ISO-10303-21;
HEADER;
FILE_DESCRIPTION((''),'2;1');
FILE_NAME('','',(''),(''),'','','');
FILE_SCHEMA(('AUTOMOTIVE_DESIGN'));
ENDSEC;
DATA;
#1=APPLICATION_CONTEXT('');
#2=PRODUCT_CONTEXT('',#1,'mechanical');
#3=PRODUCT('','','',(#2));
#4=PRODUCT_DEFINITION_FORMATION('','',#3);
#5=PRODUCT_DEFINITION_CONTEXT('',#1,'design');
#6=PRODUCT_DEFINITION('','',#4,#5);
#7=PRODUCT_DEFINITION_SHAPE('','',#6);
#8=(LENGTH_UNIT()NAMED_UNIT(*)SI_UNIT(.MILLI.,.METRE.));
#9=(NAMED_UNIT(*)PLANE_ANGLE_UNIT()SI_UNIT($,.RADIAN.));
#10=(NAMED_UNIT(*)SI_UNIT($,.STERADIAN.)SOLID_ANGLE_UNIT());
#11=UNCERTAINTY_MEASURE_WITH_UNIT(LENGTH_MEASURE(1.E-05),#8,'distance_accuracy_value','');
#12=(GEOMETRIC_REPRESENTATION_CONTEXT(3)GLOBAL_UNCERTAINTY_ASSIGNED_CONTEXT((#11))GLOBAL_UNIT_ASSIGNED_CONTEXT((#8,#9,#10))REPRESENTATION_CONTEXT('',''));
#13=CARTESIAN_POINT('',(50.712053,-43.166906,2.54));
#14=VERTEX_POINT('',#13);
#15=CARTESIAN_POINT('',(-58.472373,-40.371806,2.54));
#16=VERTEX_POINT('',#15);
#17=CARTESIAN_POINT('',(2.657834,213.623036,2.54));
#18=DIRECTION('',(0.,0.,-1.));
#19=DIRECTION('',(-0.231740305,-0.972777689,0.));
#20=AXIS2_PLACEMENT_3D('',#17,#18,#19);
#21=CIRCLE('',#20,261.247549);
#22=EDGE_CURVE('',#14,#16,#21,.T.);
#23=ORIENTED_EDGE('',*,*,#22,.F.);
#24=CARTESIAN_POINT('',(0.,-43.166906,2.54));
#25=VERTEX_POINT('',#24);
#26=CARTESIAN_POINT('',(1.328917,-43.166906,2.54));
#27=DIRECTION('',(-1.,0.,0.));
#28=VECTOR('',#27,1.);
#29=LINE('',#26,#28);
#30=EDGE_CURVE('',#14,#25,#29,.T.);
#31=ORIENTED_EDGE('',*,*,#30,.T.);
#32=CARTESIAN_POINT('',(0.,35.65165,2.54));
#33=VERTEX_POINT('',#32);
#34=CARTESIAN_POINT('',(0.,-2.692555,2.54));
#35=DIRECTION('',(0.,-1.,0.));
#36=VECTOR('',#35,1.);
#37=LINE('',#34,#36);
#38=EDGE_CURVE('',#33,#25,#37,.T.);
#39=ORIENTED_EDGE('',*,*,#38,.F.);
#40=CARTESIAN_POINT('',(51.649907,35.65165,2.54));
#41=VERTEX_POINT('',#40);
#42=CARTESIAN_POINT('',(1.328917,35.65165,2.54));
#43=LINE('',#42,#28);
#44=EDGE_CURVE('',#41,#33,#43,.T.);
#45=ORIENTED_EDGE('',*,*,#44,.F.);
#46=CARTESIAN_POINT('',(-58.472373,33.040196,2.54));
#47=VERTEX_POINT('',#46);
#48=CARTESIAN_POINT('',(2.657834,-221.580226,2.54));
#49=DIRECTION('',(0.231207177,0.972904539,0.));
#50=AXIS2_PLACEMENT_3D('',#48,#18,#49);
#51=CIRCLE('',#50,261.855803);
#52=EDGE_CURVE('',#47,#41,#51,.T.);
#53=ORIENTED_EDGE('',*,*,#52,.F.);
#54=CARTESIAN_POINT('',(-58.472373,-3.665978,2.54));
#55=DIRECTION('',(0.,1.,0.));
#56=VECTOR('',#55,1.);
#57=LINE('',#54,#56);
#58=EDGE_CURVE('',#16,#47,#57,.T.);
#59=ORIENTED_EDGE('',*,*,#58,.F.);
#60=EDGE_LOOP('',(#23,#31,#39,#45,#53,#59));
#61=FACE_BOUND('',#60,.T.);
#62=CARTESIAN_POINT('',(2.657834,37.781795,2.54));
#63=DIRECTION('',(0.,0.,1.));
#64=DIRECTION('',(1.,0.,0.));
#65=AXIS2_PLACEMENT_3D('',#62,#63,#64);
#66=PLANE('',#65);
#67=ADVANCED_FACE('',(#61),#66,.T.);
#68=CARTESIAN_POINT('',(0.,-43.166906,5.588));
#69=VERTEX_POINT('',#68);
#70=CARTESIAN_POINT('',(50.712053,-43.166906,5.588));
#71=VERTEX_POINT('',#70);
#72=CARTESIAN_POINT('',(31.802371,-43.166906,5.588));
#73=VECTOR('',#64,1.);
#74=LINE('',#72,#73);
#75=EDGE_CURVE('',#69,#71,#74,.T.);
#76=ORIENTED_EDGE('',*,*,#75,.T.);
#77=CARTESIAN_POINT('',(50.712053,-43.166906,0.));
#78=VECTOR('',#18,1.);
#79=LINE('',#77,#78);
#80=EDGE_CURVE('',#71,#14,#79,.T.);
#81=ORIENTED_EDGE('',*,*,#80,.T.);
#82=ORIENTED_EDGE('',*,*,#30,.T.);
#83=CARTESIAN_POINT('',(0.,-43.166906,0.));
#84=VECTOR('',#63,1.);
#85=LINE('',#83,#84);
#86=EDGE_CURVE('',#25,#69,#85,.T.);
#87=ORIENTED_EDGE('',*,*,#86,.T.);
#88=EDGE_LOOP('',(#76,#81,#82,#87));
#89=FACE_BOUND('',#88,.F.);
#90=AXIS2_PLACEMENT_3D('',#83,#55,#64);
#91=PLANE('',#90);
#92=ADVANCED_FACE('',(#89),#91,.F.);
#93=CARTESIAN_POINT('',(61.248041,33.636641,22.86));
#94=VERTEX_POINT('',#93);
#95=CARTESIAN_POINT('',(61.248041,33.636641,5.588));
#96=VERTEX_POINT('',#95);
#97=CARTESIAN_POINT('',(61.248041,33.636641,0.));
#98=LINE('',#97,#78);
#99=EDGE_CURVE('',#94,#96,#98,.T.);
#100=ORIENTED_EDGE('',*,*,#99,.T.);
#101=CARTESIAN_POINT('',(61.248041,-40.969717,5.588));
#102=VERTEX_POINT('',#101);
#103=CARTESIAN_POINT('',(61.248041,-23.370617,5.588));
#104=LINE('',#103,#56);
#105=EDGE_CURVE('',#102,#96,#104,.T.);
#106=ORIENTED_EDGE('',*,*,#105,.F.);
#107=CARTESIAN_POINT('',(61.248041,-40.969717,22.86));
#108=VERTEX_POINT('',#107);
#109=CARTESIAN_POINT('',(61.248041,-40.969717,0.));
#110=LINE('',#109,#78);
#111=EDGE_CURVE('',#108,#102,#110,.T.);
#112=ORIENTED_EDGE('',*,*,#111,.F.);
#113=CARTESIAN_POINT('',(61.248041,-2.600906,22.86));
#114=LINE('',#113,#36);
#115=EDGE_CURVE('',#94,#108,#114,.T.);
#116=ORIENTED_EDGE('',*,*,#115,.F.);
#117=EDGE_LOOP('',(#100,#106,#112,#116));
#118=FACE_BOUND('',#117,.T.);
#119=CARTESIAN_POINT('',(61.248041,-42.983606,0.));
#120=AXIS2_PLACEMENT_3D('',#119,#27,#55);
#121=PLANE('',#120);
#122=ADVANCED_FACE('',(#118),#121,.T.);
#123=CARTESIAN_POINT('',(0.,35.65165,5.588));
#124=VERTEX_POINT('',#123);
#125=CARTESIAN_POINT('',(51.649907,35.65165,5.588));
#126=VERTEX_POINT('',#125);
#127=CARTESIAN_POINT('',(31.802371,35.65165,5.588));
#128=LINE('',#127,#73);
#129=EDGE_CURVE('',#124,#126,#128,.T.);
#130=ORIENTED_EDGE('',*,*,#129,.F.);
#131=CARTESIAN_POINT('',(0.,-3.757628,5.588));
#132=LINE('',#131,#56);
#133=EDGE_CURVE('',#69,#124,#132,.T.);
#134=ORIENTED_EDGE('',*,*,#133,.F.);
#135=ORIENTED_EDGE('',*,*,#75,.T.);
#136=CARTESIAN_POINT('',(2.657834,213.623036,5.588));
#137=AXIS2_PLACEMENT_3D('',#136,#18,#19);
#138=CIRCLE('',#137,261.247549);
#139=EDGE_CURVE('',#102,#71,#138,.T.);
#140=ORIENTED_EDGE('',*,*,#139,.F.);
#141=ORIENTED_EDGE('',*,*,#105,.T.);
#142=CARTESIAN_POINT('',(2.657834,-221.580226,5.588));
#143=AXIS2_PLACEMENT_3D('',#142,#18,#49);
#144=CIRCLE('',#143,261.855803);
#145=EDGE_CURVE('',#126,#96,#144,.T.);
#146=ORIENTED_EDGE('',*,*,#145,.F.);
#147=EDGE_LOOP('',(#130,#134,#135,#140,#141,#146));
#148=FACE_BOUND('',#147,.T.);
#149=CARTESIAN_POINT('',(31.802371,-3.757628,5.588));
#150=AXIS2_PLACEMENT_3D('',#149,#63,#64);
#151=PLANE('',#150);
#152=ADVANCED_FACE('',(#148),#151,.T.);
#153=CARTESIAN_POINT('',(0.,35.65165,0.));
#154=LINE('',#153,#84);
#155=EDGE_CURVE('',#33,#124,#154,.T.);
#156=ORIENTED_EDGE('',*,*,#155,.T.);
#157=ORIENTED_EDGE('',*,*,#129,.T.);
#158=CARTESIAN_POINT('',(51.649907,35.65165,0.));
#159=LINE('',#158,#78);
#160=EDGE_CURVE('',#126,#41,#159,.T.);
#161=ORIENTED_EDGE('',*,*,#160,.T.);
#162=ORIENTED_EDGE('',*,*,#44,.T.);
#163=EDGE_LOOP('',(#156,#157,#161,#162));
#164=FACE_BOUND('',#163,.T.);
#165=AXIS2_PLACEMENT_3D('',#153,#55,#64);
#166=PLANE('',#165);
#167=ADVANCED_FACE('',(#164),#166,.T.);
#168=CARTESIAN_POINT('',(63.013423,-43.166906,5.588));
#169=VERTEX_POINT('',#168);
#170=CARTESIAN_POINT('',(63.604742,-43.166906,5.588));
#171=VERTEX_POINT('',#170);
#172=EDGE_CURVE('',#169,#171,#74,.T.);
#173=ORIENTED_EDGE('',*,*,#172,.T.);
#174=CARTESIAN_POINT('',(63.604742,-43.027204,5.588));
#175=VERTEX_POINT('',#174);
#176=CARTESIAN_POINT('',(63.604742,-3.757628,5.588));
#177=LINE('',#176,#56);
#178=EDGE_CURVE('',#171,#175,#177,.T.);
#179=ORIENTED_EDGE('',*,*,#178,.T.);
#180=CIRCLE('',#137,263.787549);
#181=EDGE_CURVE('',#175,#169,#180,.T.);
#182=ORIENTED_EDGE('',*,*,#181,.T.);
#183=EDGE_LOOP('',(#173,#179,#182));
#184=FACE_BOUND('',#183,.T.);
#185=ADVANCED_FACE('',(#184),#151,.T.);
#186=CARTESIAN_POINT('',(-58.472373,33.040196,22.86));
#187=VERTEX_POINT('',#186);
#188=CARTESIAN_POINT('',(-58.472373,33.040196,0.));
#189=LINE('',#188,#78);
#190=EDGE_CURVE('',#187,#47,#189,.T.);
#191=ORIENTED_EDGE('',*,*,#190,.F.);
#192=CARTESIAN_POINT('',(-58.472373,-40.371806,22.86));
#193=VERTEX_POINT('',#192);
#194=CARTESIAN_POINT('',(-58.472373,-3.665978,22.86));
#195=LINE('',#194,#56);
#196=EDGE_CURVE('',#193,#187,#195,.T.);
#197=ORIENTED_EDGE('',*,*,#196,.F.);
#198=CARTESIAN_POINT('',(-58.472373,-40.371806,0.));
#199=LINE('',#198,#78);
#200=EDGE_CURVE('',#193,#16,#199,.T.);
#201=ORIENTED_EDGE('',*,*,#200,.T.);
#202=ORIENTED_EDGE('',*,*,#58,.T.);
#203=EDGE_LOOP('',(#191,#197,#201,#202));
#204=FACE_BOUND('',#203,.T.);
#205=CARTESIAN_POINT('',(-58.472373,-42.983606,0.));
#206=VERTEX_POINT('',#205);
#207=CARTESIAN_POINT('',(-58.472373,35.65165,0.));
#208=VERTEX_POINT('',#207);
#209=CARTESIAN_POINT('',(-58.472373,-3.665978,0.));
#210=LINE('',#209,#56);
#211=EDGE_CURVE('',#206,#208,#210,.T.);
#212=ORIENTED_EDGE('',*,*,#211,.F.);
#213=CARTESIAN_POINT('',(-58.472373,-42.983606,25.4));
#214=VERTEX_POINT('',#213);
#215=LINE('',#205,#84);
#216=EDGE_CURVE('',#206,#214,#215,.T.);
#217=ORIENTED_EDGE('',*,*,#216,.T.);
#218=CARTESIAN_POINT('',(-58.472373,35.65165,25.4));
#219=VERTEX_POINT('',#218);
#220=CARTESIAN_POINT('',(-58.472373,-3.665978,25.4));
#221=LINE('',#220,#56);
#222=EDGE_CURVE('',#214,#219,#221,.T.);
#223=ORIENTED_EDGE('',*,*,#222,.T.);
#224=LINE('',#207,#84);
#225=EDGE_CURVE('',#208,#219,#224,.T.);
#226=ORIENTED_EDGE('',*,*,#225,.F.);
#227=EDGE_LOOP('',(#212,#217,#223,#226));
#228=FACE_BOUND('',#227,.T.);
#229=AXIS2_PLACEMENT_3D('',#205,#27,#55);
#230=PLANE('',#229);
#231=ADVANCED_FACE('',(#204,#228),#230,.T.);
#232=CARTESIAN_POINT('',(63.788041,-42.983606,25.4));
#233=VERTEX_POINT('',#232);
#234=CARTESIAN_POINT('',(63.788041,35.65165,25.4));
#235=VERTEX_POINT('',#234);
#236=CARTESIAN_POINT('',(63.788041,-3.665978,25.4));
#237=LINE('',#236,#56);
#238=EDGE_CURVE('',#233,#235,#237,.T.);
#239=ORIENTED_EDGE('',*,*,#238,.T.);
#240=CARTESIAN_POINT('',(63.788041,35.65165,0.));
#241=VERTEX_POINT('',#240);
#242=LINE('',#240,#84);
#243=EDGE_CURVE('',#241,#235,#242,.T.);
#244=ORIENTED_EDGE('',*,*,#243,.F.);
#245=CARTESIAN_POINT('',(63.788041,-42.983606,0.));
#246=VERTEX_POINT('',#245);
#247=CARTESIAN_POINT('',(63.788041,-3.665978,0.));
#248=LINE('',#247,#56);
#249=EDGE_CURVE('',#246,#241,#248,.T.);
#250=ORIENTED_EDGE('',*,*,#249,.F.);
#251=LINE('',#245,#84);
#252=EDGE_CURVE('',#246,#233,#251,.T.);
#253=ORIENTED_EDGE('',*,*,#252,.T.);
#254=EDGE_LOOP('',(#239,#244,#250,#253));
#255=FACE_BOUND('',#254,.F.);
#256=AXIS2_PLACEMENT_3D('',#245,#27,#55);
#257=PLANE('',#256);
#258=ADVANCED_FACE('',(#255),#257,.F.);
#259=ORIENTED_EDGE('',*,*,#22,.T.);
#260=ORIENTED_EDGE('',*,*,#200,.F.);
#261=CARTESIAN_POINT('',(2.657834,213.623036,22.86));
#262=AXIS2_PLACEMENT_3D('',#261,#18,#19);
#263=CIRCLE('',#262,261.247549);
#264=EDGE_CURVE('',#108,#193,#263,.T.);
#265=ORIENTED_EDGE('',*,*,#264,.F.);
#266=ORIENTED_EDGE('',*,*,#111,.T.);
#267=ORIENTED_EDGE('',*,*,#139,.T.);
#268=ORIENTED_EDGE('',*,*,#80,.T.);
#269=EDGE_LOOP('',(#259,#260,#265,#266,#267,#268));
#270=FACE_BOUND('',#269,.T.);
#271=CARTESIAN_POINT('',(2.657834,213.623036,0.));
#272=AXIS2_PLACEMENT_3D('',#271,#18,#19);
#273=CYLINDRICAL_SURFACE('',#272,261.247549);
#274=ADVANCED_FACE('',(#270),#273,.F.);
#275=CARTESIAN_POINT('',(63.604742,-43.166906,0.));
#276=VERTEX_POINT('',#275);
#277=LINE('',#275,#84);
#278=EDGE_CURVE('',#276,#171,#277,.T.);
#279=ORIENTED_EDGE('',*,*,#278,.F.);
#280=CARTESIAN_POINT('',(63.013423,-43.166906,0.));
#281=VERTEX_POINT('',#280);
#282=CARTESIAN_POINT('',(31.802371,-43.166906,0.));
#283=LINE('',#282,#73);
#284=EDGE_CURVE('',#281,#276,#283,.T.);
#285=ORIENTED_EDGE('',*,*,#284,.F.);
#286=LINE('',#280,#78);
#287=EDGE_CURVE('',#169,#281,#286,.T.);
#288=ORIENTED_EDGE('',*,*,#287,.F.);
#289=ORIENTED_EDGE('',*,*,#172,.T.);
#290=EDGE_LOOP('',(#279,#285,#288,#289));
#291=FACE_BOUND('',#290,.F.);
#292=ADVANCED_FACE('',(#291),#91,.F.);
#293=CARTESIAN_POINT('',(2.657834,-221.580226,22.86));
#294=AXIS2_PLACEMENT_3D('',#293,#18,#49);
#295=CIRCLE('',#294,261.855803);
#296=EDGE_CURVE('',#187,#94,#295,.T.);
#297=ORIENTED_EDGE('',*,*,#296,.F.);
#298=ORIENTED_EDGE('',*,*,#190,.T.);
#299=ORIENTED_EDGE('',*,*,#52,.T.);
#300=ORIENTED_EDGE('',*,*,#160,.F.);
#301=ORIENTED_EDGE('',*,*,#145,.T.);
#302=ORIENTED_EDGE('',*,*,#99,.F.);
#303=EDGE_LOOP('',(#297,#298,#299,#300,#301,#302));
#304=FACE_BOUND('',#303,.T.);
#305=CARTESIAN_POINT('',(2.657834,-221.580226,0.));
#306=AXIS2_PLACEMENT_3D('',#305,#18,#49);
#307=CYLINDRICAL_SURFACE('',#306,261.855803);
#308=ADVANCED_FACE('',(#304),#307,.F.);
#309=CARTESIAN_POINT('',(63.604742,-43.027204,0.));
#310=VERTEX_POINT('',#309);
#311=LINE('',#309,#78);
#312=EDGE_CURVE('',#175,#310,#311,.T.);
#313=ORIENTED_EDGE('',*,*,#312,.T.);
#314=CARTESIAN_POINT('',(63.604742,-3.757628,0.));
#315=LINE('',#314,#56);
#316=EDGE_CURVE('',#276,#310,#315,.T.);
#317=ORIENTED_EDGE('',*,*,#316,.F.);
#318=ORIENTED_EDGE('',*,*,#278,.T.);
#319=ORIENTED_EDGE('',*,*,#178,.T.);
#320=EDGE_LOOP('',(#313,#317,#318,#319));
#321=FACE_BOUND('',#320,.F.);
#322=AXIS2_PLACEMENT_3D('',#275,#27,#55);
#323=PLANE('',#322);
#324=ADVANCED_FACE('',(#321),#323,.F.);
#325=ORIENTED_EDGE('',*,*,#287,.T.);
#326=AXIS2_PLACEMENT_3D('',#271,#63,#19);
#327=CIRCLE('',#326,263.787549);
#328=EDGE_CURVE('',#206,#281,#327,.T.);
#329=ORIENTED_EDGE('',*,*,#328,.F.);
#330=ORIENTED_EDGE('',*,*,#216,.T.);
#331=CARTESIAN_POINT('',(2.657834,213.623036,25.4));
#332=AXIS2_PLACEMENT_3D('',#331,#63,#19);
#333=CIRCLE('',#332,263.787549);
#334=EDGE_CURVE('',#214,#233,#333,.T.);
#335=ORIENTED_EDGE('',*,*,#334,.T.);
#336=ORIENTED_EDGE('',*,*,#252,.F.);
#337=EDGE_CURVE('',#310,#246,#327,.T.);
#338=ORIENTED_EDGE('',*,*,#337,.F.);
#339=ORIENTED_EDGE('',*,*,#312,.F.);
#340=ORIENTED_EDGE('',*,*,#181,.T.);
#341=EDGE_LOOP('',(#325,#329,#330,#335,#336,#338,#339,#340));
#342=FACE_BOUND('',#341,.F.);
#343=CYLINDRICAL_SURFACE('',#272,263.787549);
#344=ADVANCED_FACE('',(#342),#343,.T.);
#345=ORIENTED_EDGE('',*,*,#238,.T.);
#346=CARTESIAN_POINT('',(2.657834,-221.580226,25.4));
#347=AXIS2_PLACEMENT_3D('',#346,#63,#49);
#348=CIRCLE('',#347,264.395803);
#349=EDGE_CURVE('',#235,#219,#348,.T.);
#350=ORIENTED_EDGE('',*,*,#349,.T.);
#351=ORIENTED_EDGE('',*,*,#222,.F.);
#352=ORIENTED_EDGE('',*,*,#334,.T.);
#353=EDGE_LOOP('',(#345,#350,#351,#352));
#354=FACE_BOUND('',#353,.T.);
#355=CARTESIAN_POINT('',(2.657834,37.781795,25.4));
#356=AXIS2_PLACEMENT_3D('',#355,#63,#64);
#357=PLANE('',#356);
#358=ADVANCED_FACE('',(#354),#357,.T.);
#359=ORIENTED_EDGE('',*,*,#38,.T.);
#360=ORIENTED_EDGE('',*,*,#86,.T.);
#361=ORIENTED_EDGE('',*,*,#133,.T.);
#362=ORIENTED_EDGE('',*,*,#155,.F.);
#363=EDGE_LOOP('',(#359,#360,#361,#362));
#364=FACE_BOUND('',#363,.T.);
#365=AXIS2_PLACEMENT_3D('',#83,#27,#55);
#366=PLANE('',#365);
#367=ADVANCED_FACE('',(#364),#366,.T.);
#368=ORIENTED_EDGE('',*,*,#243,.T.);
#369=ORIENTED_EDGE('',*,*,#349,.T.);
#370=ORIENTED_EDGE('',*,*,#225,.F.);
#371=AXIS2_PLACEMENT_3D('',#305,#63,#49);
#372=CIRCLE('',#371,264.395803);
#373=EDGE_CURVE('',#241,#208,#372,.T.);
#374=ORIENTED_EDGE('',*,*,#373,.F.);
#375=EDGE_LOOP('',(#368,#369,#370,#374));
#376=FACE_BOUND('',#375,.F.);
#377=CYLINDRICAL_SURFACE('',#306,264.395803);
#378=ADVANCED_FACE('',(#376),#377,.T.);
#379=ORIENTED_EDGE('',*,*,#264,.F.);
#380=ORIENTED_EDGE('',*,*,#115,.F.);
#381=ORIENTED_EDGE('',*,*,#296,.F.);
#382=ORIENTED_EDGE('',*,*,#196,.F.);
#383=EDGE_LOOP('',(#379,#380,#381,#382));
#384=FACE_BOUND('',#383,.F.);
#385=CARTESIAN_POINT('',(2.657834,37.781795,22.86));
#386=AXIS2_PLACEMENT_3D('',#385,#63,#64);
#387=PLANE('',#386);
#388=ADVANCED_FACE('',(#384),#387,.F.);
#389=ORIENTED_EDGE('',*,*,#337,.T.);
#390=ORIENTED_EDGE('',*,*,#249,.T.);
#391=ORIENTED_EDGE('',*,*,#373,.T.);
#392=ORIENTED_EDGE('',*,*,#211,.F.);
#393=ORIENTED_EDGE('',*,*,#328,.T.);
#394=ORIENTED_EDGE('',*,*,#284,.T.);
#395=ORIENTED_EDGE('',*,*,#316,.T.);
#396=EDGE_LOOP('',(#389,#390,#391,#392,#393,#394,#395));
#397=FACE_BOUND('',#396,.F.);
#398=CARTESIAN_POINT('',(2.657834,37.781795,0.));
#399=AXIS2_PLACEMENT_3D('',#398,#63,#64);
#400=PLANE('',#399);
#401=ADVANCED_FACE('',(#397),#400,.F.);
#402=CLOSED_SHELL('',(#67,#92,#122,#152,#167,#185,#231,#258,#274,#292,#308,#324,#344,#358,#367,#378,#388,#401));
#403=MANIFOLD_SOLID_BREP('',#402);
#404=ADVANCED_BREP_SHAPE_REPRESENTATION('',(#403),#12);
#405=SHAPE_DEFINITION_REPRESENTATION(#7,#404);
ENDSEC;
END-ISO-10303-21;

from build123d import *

# Parameters (mm, degrees)
F0_W     = 122.2604140639
F0_H     = 78.6352567375
F2_DEPTH = 25.4
F3_T     = -2.54
F1_W     = 63.6047422886
F1_H     = 78.8185559213
F4_DEPTH = 5.588
F5_R     = 1.6394762834
F6_DEPTH = 28.194
F5_R_2   = 1.6394765438
F7_DEPTH = 32.258


# Not quite as in the source:
# - the program builds the solid bodies; features that only make, move or delete a surface that nothing else refers to are left out


with BuildPart() as f2:
    # F0 (on Top) → F2 (new body)
    with BuildSketch(Plane.XY):
        with BuildLine():
            ThreePointArc((63.7880414724, 35.6516502798), (2.6578344405, 42.8155765092), (-58.4723725915, 35.6516502798))
            Line((-58.4723725915, 35.6516502798), (63.7880414724, 35.6516502798))
        make_face()
        with Locations((2.6578344405, -3.665978089)):
            Rectangle(F0_W, F0_H)
        with BuildLine():
            Line((63.7880414724, -42.9836064577), (-58.4723725915, -42.9836064577))
            ThreePointArc((-58.4723725915, -42.9836064577), (2.6578344405, -50.1645132958), (63.7880414724, -42.9836064577))
        make_face()
    extrude(amount=F2_DEPTH)

    # F3
    f3_openings = [f2.faces().sort_by_distance(p)[0] for p in [
        (-58.472373, -3.665978, 12.7),
    ]]
    offset(amount=F3_T, openings=f3_openings)

    # F1 (on Top) → F4 (join)
    with BuildSketch(Plane.XY):
        with Locations((31.8023711443, -3.7576276809)):
            Rectangle(F1_W, F1_H)
    extrude(amount=F4_DEPTH)

    # F5 (on Front) → F6 (cut)
    with BuildSketch(Plane.XZ):
        with Locations((-47.8410311043, 4.857422784)):
            Circle(F5_R)
    extrude(amount=-F6_DEPTH, mode=Mode.SUBTRACT)

    # F5 (on Front) → F7 (cut)
    with BuildSketch(Plane.XZ):
        with Locations((-13.1975244731, 4.857422784)):
            Circle(F5_R_2)
        with Locations((-47.8410311043, 4.857422784)):
            Circle(F5_R)
    extrude(amount=-F7_DEPTH, mode=Mode.SUBTRACT)


solid = f2.part
